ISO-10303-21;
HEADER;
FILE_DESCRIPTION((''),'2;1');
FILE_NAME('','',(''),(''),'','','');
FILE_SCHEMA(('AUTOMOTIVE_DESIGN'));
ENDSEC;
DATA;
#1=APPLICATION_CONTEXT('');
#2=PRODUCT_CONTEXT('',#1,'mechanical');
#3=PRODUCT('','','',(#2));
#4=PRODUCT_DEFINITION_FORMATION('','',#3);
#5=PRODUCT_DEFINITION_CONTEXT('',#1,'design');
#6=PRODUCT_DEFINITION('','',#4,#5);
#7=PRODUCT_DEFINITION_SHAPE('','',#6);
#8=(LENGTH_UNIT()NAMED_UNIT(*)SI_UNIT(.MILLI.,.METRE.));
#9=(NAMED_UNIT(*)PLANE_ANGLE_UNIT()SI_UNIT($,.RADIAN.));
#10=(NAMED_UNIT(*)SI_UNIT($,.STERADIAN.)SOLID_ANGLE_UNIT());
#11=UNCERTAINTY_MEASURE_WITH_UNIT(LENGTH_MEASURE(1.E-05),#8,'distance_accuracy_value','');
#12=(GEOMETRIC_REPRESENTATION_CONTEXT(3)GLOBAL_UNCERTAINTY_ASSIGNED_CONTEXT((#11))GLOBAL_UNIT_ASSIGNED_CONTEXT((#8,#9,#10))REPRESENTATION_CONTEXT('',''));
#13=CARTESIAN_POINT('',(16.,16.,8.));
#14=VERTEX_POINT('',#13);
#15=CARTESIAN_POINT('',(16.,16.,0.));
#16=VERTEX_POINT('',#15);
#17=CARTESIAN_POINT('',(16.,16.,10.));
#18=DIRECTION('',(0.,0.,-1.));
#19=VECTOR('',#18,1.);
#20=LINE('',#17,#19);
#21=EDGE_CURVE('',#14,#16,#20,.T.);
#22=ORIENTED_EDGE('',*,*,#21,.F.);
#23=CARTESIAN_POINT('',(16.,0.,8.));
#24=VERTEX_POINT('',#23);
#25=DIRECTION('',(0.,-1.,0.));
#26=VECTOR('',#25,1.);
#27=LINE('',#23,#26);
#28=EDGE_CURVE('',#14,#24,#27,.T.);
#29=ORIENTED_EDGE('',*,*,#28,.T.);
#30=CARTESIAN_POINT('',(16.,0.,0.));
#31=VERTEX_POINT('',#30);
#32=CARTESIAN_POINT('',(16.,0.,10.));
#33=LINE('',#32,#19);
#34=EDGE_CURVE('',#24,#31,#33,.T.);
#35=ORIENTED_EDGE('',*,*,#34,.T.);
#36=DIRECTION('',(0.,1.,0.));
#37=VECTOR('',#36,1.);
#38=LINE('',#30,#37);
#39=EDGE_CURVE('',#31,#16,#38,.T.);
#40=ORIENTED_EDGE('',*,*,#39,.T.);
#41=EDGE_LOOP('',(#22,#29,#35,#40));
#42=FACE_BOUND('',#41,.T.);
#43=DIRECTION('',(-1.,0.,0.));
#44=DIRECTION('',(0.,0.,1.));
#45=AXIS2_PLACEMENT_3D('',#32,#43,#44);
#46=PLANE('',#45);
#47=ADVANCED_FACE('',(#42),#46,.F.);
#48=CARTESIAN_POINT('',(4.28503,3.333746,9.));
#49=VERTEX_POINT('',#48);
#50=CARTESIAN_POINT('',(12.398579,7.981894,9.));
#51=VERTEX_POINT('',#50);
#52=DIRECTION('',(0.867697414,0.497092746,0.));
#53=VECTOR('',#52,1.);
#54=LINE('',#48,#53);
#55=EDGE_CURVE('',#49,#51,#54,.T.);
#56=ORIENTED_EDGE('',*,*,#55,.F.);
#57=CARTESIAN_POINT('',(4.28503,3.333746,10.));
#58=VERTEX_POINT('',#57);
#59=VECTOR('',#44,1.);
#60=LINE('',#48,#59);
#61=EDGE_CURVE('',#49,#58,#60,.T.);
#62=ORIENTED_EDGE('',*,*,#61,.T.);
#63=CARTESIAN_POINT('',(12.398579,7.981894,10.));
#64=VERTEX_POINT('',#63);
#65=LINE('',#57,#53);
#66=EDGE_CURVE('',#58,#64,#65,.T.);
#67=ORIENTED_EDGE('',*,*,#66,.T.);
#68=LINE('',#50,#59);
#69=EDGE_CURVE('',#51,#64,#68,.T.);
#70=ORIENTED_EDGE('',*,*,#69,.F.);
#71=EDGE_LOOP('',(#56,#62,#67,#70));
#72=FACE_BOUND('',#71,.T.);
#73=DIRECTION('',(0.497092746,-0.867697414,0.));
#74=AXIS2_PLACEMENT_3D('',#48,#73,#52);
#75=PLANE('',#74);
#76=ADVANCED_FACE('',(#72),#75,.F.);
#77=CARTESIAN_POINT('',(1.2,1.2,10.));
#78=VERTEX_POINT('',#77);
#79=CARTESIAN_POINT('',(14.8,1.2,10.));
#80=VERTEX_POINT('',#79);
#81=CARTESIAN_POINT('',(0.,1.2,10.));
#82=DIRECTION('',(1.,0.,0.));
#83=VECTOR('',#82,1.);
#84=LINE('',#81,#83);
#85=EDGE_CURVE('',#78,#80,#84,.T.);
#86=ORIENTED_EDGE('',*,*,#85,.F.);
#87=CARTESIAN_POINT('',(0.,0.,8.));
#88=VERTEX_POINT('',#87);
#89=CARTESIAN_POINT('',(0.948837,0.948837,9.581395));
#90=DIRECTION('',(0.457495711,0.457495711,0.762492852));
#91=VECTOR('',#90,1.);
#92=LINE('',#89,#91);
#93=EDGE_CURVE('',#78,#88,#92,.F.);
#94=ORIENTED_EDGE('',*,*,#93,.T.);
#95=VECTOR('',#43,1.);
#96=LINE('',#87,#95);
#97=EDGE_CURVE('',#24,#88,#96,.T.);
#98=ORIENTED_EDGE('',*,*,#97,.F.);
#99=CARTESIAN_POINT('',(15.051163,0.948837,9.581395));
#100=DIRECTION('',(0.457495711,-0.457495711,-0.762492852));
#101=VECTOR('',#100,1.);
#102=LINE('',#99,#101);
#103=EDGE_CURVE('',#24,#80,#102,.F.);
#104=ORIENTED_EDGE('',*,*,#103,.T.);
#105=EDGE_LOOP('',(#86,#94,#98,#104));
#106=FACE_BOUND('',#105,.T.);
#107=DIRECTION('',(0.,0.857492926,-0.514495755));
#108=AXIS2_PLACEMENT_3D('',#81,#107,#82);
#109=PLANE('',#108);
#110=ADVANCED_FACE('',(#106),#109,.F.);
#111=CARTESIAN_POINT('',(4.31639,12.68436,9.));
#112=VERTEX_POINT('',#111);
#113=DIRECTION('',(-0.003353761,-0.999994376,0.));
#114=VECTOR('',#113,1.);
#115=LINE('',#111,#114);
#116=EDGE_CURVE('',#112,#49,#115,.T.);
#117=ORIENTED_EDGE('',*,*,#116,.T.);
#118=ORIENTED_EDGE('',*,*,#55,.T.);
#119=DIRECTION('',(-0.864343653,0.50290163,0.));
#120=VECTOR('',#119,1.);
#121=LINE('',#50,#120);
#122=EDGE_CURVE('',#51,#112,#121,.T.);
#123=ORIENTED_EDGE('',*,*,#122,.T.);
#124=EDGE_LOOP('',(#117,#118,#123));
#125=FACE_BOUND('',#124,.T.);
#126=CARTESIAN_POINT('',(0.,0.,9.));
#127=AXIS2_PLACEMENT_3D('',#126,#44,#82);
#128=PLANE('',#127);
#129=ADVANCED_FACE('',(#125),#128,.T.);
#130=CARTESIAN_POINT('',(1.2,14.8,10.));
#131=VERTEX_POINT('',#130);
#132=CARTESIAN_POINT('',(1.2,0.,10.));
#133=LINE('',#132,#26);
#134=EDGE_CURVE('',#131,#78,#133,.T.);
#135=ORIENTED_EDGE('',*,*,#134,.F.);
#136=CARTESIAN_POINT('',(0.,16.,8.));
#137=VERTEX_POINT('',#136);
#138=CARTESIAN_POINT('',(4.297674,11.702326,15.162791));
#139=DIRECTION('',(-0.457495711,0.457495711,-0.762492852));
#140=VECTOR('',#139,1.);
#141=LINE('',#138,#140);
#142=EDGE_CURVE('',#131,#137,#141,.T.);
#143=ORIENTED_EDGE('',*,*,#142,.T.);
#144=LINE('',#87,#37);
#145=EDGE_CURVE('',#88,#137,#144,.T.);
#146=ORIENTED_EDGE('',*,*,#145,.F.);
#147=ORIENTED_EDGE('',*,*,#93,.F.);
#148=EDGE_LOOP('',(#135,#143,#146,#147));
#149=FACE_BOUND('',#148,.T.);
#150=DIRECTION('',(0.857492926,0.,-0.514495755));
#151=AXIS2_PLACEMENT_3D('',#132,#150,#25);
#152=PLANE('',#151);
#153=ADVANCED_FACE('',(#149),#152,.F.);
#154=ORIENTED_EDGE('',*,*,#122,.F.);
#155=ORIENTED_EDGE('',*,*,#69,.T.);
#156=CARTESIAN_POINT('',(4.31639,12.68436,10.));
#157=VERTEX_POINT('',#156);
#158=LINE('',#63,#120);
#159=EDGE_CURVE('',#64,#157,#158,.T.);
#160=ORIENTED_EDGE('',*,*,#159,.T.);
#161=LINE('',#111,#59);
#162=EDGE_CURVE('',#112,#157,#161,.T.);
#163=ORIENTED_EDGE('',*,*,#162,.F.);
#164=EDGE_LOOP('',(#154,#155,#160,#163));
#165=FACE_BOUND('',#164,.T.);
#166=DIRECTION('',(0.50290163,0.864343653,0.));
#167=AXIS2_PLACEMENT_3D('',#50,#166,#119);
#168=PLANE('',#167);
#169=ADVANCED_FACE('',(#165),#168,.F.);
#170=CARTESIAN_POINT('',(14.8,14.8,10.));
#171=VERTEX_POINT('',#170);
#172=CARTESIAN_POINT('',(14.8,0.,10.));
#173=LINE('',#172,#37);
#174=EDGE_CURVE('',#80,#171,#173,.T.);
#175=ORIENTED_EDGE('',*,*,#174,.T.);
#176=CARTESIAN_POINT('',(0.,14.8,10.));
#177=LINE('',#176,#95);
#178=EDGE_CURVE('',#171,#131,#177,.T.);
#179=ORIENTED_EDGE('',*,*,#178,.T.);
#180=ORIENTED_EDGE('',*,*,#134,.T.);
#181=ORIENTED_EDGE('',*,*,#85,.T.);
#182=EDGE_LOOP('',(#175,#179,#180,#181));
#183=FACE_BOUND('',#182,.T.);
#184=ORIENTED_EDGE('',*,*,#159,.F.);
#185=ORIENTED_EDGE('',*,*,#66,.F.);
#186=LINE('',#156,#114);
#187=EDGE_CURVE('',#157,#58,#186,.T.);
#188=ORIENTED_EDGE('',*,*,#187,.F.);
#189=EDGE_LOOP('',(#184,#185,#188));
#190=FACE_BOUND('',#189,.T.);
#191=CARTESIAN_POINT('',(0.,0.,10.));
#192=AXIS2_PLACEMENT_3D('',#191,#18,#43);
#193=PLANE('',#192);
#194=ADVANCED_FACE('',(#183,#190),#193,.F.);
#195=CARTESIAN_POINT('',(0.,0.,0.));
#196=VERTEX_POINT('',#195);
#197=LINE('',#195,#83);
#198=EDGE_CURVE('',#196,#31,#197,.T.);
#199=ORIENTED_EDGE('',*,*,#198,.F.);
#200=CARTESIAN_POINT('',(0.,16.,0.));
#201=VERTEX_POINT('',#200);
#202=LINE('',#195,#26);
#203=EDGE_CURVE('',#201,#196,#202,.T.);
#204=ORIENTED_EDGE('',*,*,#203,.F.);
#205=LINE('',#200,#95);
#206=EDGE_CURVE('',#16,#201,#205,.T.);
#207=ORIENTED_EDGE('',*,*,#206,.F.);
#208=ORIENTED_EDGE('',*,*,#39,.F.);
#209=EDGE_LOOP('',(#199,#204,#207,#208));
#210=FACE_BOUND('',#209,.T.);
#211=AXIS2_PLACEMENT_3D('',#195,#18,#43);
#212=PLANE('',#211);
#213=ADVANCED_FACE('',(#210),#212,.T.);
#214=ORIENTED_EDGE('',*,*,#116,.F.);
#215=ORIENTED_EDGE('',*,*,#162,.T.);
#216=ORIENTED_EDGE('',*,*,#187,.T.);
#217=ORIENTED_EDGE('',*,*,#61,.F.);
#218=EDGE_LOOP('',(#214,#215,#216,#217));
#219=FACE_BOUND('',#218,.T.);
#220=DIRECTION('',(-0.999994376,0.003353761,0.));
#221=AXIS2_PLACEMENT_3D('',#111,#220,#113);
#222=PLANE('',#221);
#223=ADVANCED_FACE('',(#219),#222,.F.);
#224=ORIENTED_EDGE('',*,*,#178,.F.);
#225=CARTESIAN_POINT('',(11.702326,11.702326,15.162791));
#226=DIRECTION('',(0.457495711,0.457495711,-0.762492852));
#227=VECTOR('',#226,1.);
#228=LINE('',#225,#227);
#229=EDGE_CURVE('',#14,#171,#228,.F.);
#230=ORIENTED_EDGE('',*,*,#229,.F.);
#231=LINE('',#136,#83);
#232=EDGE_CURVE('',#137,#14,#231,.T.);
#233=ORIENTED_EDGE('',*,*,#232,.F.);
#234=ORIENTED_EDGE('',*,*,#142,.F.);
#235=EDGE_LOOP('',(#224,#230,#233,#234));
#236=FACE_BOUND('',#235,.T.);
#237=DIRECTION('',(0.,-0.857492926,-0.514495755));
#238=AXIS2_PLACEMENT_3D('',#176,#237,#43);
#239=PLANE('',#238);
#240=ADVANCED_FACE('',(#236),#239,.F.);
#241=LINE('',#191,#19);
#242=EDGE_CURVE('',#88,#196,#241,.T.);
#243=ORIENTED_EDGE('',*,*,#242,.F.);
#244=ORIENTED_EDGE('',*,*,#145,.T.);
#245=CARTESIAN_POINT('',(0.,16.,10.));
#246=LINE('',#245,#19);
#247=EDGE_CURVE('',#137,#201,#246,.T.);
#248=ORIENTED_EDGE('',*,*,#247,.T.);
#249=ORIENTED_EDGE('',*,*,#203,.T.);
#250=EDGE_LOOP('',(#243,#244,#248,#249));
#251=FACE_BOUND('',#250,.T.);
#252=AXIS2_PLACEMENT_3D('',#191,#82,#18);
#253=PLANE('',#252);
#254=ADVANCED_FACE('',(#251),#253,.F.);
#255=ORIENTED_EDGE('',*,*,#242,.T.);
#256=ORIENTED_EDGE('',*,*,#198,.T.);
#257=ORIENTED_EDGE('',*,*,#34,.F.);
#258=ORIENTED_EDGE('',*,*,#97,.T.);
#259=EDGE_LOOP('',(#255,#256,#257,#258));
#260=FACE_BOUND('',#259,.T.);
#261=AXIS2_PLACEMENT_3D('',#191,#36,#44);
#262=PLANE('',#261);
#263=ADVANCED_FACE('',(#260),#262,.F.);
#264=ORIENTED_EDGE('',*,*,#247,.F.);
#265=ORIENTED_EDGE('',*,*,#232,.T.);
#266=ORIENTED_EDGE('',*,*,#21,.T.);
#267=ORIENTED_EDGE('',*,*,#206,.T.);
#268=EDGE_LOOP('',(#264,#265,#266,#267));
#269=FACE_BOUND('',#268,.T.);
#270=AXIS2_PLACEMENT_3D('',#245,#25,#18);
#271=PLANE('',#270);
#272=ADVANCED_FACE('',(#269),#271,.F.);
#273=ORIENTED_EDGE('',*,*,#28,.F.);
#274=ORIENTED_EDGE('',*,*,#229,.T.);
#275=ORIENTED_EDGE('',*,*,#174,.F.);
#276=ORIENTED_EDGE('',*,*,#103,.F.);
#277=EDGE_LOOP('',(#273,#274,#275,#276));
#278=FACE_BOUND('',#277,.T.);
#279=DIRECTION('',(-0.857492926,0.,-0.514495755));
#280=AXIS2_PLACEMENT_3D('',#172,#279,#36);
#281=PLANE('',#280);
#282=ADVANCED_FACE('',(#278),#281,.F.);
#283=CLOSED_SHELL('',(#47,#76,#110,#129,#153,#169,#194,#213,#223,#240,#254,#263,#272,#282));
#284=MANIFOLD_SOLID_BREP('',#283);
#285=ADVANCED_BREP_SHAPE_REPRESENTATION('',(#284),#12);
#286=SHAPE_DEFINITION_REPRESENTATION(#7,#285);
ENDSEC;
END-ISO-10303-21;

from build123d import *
from OCP.BRepFilletAPI import BRepFilletAPI_MakeChamfer

# Parameters (mm, degrees)
SKETCH1_W           = 16
SKETCH1_H           = 16
BOSS_EXTRUDE1_DEPTH = 10
CUT_EXTRUDE1_DEPTH  = 1
FILLET4_SIZE        = 2
FILLET4_SIZE2       = 1.2


with BuildPart() as part:
    # Sketch1 → Boss-Extrude1 (new body)
    with BuildSketch(Plane.XY):
        with Locations((8, 8)):
            Rectangle(SKETCH1_W, SKETCH1_H)
    extrude(amount=BOSS_EXTRUDE1_DEPTH)

    # Sketch2 → Cut-Extrude1 (cut)
    with BuildSketch(Plane.XY.offset(10)):
        Polygon((4.316390203, 12.684359808), (4.285030305, 3.333745838), (12.398579492, 7.981894354), align=None)
    extrude(amount=-CUT_EXTRUDE1_DEPTH, mode=Mode.SUBTRACT)

    # Fillet4: one chamfer whose edges measure the first distance from different faces: ONE call of the kernel's chamfer builder (chamfer() names one face for all edges)
    fillet4_edges_1 = [part.edges().sort_by_distance(p)[0] for p in [
        (16, 8, 10),
    ]]
    fillet4_side_1 = [part.faces().sort_by_distance(p)[0] for p in [
        (16, 8, 5),
    ]]
    fillet4_edges_2 = [part.edges().sort_by_distance(p)[0] for p in [
        (8, 16, 10),
    ]]
    fillet4_side_2 = [part.faces().sort_by_distance(p)[0] for p in [
        (8, 16, 5),
    ]]
    fillet4_edges_3 = [part.edges().sort_by_distance(p)[0] for p in [
        (0, 8, 10),
    ]]
    fillet4_side_3 = [part.faces().sort_by_distance(p)[0] for p in [
        (0, 8, 5),
    ]]
    fillet4_edges_4 = [part.edges().sort_by_distance(p)[0] for p in [
        (8, 0, 10),
    ]]
    fillet4_side_4 = [part.faces().sort_by_distance(p)[0] for p in [
        (8, 0, 5),
    ]]
    fillet4 = BRepFilletAPI_MakeChamfer(part.part.solid().wrapped)
    for e in fillet4_edges_1:
        fillet4.Add(FILLET4_SIZE, FILLET4_SIZE2, e.wrapped, fillet4_side_1[0].wrapped)  # the first distance lies on this face
    for e in fillet4_edges_2:
        fillet4.Add(FILLET4_SIZE, FILLET4_SIZE2, e.wrapped, fillet4_side_2[0].wrapped)  # the first distance lies on this face
    for e in fillet4_edges_3:
        fillet4.Add(FILLET4_SIZE, FILLET4_SIZE2, e.wrapped, fillet4_side_3[0].wrapped)  # the first distance lies on this face
    for e in fillet4_edges_4:
        fillet4.Add(FILLET4_SIZE, FILLET4_SIZE2, e.wrapped, fillet4_side_4[0].wrapped)  # the first distance lies on this face
    add(Compound.cast(fillet4.Shape()), mode=Mode.REPLACE)


solid = part.part
